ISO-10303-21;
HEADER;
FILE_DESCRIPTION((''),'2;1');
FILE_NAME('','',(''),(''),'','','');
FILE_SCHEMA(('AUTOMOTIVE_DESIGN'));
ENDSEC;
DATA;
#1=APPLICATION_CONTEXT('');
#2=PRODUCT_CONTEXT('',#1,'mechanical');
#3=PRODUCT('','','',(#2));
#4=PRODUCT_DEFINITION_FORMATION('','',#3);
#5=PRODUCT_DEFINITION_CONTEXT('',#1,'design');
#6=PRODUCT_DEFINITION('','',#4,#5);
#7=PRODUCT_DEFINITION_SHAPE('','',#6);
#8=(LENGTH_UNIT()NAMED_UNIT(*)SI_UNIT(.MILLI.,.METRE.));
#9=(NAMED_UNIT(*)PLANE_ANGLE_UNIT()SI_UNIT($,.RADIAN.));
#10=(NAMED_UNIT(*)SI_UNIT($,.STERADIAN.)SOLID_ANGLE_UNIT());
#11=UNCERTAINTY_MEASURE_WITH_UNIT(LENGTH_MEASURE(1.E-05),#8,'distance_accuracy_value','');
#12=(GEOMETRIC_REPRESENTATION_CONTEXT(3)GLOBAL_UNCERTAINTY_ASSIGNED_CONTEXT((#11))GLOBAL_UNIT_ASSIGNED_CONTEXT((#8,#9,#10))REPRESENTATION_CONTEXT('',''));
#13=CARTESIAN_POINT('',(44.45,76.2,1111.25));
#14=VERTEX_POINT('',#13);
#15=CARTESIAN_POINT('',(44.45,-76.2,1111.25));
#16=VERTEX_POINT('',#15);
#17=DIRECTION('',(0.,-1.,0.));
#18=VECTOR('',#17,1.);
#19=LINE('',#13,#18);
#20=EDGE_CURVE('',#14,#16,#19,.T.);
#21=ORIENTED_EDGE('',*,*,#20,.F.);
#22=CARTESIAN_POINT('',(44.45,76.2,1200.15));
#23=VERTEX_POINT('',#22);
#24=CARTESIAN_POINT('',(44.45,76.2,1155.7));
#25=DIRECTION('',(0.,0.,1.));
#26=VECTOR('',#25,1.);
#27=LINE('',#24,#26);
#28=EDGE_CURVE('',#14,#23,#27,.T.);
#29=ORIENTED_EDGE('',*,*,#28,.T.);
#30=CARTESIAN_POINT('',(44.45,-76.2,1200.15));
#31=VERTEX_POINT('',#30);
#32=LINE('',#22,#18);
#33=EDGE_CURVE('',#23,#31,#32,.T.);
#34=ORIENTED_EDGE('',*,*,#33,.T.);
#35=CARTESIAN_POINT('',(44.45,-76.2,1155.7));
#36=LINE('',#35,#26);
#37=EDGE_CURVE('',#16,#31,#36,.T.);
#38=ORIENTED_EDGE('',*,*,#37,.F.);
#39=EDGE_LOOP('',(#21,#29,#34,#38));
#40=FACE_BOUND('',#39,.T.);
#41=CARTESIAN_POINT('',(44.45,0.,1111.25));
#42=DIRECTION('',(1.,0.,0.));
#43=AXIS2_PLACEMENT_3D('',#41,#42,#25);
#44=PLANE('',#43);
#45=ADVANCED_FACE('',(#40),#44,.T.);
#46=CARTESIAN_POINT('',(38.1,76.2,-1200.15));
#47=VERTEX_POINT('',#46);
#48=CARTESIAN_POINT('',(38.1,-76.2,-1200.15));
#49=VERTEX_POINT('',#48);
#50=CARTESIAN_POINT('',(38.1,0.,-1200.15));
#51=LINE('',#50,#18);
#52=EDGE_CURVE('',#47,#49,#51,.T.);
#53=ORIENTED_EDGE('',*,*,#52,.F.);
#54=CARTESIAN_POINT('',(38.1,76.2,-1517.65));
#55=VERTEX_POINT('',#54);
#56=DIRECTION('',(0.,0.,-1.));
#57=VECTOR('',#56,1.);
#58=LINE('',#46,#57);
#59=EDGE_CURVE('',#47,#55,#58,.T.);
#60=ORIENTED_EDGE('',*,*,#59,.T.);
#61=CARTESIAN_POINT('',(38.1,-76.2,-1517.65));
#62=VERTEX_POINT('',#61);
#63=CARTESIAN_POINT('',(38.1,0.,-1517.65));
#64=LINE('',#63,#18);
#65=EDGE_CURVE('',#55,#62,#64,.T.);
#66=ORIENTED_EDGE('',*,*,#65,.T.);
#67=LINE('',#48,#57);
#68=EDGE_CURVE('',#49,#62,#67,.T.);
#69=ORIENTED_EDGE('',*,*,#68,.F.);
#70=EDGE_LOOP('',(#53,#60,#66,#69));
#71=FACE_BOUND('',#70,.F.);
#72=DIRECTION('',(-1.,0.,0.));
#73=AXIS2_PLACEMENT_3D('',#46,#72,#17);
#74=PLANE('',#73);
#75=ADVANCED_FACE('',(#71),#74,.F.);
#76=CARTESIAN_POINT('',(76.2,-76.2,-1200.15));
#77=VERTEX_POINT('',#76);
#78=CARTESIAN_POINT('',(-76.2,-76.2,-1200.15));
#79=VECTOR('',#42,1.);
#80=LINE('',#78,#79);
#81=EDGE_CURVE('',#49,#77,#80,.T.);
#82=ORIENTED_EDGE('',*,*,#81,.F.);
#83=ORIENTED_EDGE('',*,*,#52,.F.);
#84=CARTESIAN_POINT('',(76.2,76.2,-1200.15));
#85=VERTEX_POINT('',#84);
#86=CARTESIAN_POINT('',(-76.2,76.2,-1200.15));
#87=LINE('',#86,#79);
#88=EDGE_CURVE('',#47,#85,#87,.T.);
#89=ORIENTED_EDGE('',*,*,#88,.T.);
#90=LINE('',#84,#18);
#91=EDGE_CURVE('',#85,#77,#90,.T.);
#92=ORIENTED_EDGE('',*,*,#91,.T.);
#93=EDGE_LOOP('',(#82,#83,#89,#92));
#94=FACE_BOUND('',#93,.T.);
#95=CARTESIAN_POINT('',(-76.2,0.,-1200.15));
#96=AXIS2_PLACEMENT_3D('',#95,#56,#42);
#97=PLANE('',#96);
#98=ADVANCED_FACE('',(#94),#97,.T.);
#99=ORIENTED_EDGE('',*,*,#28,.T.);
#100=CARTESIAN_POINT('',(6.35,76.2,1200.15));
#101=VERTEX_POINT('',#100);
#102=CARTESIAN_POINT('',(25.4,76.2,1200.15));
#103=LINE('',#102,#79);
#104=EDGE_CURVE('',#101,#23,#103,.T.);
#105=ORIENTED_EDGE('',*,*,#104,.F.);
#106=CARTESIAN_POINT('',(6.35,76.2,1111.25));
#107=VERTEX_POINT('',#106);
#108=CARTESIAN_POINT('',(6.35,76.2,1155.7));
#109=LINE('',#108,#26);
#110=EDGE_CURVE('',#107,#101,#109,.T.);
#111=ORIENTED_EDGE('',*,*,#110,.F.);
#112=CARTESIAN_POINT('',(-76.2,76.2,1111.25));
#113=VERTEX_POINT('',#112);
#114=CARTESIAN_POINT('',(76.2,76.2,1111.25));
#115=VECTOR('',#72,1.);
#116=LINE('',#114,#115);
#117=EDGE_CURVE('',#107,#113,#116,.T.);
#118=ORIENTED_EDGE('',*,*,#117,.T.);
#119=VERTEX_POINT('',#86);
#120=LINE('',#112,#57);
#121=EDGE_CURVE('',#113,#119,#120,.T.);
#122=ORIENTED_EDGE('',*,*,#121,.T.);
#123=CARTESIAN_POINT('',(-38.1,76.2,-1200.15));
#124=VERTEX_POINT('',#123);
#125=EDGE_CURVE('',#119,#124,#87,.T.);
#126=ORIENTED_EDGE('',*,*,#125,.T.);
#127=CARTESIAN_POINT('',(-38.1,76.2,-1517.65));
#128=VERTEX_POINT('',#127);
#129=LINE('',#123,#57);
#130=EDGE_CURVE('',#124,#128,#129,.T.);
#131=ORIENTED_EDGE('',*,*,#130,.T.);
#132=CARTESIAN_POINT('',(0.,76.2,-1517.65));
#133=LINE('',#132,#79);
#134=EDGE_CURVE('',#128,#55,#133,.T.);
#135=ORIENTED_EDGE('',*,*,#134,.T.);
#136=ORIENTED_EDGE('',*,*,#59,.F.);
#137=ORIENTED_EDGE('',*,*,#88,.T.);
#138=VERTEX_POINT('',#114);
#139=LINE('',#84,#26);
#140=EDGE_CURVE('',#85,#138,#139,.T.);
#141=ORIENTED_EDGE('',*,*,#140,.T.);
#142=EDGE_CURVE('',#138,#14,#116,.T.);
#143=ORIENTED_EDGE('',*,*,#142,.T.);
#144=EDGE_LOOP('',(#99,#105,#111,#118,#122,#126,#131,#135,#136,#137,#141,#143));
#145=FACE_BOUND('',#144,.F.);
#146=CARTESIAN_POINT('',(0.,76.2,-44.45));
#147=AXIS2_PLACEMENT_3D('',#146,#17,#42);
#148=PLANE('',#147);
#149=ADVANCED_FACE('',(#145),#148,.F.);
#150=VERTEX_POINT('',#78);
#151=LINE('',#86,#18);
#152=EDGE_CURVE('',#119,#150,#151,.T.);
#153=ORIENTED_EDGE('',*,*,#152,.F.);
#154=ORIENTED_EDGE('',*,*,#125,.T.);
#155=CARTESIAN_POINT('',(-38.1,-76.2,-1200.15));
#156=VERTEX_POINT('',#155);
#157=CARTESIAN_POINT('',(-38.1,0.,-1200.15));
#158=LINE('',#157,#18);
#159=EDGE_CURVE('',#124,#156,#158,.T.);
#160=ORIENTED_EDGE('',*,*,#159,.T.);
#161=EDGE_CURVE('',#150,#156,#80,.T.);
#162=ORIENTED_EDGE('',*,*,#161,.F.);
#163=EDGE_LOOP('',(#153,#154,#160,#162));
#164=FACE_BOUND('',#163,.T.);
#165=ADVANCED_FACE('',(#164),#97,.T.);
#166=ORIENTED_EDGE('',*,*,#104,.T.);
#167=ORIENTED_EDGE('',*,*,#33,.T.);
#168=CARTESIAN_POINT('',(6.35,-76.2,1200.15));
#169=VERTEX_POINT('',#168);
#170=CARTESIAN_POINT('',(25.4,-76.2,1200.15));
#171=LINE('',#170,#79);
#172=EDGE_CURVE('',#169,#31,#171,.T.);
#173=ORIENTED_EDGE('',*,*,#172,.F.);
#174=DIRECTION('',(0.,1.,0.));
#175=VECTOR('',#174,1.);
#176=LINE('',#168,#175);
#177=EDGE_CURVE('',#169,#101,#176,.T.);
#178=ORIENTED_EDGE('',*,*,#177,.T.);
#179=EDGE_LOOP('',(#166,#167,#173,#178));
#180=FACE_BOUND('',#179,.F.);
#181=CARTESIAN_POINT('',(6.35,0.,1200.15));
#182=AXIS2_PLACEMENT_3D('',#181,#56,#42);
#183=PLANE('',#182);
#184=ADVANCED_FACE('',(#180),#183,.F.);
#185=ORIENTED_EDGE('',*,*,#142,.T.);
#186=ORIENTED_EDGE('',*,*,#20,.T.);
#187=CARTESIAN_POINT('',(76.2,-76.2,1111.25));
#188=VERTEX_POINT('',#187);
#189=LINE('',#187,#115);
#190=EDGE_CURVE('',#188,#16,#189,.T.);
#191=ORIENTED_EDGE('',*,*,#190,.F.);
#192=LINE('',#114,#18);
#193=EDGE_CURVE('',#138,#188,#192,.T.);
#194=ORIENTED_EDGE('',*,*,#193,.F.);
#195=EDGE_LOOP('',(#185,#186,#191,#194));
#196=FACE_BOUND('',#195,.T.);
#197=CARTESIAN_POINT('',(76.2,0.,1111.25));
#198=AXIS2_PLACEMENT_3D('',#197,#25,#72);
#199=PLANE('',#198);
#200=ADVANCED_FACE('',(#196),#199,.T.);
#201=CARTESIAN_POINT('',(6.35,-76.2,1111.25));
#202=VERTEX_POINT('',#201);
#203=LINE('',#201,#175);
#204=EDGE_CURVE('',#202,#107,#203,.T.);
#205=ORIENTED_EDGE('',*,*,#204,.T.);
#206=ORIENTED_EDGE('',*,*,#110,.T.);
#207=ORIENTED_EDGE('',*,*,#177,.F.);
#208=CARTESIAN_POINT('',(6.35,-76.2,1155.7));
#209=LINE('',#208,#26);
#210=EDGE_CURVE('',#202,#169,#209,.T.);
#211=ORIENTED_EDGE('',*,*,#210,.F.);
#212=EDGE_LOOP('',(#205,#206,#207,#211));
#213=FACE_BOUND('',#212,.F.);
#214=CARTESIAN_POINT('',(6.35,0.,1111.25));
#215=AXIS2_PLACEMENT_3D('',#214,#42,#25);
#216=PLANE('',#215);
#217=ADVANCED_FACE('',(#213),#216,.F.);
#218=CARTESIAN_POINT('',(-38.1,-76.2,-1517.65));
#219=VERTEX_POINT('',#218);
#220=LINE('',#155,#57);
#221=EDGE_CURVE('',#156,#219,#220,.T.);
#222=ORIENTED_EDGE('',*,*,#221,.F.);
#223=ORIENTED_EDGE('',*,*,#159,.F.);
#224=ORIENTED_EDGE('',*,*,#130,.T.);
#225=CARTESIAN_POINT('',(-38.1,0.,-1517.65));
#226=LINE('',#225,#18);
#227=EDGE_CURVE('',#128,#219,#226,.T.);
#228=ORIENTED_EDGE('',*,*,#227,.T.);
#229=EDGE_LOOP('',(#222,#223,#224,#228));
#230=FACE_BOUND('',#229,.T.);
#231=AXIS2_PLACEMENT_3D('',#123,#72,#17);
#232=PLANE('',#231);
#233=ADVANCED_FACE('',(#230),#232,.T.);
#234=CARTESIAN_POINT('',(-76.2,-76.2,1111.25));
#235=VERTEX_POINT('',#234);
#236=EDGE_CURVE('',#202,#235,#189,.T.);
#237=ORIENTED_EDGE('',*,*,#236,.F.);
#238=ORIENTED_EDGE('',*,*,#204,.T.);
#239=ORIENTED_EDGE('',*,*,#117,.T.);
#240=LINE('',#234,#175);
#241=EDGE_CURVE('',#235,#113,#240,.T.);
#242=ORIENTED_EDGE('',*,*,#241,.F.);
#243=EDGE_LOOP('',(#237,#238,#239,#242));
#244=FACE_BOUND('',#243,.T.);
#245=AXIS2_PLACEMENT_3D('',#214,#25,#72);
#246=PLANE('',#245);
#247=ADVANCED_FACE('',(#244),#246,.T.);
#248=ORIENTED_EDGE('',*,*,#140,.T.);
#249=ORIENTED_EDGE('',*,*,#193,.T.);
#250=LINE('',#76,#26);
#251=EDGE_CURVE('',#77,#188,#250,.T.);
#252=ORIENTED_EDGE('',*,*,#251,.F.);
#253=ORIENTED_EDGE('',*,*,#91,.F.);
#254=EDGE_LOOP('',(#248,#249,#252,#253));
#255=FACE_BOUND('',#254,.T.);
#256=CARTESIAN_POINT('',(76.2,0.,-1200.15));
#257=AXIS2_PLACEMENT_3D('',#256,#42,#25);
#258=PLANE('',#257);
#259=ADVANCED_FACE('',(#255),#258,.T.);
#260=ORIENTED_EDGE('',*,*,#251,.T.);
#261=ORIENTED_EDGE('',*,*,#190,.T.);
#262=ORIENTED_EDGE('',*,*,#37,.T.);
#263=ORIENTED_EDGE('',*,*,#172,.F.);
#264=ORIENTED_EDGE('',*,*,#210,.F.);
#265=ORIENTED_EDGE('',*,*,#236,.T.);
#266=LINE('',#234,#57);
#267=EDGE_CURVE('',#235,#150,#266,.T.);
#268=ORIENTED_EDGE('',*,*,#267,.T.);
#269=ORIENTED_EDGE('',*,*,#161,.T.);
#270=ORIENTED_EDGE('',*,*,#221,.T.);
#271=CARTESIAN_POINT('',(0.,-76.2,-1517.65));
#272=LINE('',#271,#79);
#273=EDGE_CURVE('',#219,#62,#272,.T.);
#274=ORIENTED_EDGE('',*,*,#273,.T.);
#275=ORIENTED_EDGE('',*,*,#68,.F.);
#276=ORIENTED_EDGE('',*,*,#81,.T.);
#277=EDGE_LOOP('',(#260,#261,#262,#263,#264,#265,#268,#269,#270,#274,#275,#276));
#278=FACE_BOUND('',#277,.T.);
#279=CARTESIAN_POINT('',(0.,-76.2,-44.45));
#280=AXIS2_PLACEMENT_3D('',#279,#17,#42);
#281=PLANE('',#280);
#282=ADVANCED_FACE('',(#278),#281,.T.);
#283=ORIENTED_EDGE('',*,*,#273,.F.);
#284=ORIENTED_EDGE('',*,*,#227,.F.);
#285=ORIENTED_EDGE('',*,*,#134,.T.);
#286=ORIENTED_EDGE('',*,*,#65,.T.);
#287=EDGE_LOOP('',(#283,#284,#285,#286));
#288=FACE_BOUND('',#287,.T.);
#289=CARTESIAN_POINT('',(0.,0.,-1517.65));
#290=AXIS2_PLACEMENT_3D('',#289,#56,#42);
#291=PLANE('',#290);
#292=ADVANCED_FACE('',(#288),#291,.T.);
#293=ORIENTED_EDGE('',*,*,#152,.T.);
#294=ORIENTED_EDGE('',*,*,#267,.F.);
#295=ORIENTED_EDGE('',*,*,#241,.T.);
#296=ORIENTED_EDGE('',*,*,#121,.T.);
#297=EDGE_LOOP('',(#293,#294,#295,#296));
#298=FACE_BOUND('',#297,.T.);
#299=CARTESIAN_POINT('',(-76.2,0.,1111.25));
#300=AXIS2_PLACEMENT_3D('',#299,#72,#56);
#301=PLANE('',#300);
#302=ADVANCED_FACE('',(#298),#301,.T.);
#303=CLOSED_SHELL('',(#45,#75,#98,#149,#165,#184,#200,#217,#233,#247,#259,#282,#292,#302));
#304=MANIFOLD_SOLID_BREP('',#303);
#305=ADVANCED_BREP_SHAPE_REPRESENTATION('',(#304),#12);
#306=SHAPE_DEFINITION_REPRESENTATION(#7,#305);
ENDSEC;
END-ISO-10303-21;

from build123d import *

# Parameters (mm, degrees)
F0_W     = 38.1
F0_H     = 88.9
F1_DEPTH = 76.2
F2_W     = 76.2
F2_H     = 152.4
F3_DEPTH = 317.5


# Not quite as in the source:
# - a feature names something its author has since deleted; it is built from what else it names


with BuildPart() as f1:
    # F0 (on Front) → F1 (new body, symmetric)
    with BuildSketch(Plane.XZ):
        Polygon((6.35, 1111.25), (-76.2, 1111.25), (-76.2, -1200.15), (76.2, -1200.15), (76.2, 1111.25), (44.45, 1111.25), align=None)
        with Locations((25.4, 1155.7)):
            Rectangle(F0_W, F0_H)
    extrude(amount=F1_DEPTH, both=True)

    # F2 (on face) → F3 (join)
    with BuildSketch(Plane(origin=(0, 0, -1200.15), x_dir=(1, 0, 0), z_dir=(0, 0, -1))):
        Rectangle(F2_W, F2_H)
    extrude(amount=F3_DEPTH)


solid = f1.part
